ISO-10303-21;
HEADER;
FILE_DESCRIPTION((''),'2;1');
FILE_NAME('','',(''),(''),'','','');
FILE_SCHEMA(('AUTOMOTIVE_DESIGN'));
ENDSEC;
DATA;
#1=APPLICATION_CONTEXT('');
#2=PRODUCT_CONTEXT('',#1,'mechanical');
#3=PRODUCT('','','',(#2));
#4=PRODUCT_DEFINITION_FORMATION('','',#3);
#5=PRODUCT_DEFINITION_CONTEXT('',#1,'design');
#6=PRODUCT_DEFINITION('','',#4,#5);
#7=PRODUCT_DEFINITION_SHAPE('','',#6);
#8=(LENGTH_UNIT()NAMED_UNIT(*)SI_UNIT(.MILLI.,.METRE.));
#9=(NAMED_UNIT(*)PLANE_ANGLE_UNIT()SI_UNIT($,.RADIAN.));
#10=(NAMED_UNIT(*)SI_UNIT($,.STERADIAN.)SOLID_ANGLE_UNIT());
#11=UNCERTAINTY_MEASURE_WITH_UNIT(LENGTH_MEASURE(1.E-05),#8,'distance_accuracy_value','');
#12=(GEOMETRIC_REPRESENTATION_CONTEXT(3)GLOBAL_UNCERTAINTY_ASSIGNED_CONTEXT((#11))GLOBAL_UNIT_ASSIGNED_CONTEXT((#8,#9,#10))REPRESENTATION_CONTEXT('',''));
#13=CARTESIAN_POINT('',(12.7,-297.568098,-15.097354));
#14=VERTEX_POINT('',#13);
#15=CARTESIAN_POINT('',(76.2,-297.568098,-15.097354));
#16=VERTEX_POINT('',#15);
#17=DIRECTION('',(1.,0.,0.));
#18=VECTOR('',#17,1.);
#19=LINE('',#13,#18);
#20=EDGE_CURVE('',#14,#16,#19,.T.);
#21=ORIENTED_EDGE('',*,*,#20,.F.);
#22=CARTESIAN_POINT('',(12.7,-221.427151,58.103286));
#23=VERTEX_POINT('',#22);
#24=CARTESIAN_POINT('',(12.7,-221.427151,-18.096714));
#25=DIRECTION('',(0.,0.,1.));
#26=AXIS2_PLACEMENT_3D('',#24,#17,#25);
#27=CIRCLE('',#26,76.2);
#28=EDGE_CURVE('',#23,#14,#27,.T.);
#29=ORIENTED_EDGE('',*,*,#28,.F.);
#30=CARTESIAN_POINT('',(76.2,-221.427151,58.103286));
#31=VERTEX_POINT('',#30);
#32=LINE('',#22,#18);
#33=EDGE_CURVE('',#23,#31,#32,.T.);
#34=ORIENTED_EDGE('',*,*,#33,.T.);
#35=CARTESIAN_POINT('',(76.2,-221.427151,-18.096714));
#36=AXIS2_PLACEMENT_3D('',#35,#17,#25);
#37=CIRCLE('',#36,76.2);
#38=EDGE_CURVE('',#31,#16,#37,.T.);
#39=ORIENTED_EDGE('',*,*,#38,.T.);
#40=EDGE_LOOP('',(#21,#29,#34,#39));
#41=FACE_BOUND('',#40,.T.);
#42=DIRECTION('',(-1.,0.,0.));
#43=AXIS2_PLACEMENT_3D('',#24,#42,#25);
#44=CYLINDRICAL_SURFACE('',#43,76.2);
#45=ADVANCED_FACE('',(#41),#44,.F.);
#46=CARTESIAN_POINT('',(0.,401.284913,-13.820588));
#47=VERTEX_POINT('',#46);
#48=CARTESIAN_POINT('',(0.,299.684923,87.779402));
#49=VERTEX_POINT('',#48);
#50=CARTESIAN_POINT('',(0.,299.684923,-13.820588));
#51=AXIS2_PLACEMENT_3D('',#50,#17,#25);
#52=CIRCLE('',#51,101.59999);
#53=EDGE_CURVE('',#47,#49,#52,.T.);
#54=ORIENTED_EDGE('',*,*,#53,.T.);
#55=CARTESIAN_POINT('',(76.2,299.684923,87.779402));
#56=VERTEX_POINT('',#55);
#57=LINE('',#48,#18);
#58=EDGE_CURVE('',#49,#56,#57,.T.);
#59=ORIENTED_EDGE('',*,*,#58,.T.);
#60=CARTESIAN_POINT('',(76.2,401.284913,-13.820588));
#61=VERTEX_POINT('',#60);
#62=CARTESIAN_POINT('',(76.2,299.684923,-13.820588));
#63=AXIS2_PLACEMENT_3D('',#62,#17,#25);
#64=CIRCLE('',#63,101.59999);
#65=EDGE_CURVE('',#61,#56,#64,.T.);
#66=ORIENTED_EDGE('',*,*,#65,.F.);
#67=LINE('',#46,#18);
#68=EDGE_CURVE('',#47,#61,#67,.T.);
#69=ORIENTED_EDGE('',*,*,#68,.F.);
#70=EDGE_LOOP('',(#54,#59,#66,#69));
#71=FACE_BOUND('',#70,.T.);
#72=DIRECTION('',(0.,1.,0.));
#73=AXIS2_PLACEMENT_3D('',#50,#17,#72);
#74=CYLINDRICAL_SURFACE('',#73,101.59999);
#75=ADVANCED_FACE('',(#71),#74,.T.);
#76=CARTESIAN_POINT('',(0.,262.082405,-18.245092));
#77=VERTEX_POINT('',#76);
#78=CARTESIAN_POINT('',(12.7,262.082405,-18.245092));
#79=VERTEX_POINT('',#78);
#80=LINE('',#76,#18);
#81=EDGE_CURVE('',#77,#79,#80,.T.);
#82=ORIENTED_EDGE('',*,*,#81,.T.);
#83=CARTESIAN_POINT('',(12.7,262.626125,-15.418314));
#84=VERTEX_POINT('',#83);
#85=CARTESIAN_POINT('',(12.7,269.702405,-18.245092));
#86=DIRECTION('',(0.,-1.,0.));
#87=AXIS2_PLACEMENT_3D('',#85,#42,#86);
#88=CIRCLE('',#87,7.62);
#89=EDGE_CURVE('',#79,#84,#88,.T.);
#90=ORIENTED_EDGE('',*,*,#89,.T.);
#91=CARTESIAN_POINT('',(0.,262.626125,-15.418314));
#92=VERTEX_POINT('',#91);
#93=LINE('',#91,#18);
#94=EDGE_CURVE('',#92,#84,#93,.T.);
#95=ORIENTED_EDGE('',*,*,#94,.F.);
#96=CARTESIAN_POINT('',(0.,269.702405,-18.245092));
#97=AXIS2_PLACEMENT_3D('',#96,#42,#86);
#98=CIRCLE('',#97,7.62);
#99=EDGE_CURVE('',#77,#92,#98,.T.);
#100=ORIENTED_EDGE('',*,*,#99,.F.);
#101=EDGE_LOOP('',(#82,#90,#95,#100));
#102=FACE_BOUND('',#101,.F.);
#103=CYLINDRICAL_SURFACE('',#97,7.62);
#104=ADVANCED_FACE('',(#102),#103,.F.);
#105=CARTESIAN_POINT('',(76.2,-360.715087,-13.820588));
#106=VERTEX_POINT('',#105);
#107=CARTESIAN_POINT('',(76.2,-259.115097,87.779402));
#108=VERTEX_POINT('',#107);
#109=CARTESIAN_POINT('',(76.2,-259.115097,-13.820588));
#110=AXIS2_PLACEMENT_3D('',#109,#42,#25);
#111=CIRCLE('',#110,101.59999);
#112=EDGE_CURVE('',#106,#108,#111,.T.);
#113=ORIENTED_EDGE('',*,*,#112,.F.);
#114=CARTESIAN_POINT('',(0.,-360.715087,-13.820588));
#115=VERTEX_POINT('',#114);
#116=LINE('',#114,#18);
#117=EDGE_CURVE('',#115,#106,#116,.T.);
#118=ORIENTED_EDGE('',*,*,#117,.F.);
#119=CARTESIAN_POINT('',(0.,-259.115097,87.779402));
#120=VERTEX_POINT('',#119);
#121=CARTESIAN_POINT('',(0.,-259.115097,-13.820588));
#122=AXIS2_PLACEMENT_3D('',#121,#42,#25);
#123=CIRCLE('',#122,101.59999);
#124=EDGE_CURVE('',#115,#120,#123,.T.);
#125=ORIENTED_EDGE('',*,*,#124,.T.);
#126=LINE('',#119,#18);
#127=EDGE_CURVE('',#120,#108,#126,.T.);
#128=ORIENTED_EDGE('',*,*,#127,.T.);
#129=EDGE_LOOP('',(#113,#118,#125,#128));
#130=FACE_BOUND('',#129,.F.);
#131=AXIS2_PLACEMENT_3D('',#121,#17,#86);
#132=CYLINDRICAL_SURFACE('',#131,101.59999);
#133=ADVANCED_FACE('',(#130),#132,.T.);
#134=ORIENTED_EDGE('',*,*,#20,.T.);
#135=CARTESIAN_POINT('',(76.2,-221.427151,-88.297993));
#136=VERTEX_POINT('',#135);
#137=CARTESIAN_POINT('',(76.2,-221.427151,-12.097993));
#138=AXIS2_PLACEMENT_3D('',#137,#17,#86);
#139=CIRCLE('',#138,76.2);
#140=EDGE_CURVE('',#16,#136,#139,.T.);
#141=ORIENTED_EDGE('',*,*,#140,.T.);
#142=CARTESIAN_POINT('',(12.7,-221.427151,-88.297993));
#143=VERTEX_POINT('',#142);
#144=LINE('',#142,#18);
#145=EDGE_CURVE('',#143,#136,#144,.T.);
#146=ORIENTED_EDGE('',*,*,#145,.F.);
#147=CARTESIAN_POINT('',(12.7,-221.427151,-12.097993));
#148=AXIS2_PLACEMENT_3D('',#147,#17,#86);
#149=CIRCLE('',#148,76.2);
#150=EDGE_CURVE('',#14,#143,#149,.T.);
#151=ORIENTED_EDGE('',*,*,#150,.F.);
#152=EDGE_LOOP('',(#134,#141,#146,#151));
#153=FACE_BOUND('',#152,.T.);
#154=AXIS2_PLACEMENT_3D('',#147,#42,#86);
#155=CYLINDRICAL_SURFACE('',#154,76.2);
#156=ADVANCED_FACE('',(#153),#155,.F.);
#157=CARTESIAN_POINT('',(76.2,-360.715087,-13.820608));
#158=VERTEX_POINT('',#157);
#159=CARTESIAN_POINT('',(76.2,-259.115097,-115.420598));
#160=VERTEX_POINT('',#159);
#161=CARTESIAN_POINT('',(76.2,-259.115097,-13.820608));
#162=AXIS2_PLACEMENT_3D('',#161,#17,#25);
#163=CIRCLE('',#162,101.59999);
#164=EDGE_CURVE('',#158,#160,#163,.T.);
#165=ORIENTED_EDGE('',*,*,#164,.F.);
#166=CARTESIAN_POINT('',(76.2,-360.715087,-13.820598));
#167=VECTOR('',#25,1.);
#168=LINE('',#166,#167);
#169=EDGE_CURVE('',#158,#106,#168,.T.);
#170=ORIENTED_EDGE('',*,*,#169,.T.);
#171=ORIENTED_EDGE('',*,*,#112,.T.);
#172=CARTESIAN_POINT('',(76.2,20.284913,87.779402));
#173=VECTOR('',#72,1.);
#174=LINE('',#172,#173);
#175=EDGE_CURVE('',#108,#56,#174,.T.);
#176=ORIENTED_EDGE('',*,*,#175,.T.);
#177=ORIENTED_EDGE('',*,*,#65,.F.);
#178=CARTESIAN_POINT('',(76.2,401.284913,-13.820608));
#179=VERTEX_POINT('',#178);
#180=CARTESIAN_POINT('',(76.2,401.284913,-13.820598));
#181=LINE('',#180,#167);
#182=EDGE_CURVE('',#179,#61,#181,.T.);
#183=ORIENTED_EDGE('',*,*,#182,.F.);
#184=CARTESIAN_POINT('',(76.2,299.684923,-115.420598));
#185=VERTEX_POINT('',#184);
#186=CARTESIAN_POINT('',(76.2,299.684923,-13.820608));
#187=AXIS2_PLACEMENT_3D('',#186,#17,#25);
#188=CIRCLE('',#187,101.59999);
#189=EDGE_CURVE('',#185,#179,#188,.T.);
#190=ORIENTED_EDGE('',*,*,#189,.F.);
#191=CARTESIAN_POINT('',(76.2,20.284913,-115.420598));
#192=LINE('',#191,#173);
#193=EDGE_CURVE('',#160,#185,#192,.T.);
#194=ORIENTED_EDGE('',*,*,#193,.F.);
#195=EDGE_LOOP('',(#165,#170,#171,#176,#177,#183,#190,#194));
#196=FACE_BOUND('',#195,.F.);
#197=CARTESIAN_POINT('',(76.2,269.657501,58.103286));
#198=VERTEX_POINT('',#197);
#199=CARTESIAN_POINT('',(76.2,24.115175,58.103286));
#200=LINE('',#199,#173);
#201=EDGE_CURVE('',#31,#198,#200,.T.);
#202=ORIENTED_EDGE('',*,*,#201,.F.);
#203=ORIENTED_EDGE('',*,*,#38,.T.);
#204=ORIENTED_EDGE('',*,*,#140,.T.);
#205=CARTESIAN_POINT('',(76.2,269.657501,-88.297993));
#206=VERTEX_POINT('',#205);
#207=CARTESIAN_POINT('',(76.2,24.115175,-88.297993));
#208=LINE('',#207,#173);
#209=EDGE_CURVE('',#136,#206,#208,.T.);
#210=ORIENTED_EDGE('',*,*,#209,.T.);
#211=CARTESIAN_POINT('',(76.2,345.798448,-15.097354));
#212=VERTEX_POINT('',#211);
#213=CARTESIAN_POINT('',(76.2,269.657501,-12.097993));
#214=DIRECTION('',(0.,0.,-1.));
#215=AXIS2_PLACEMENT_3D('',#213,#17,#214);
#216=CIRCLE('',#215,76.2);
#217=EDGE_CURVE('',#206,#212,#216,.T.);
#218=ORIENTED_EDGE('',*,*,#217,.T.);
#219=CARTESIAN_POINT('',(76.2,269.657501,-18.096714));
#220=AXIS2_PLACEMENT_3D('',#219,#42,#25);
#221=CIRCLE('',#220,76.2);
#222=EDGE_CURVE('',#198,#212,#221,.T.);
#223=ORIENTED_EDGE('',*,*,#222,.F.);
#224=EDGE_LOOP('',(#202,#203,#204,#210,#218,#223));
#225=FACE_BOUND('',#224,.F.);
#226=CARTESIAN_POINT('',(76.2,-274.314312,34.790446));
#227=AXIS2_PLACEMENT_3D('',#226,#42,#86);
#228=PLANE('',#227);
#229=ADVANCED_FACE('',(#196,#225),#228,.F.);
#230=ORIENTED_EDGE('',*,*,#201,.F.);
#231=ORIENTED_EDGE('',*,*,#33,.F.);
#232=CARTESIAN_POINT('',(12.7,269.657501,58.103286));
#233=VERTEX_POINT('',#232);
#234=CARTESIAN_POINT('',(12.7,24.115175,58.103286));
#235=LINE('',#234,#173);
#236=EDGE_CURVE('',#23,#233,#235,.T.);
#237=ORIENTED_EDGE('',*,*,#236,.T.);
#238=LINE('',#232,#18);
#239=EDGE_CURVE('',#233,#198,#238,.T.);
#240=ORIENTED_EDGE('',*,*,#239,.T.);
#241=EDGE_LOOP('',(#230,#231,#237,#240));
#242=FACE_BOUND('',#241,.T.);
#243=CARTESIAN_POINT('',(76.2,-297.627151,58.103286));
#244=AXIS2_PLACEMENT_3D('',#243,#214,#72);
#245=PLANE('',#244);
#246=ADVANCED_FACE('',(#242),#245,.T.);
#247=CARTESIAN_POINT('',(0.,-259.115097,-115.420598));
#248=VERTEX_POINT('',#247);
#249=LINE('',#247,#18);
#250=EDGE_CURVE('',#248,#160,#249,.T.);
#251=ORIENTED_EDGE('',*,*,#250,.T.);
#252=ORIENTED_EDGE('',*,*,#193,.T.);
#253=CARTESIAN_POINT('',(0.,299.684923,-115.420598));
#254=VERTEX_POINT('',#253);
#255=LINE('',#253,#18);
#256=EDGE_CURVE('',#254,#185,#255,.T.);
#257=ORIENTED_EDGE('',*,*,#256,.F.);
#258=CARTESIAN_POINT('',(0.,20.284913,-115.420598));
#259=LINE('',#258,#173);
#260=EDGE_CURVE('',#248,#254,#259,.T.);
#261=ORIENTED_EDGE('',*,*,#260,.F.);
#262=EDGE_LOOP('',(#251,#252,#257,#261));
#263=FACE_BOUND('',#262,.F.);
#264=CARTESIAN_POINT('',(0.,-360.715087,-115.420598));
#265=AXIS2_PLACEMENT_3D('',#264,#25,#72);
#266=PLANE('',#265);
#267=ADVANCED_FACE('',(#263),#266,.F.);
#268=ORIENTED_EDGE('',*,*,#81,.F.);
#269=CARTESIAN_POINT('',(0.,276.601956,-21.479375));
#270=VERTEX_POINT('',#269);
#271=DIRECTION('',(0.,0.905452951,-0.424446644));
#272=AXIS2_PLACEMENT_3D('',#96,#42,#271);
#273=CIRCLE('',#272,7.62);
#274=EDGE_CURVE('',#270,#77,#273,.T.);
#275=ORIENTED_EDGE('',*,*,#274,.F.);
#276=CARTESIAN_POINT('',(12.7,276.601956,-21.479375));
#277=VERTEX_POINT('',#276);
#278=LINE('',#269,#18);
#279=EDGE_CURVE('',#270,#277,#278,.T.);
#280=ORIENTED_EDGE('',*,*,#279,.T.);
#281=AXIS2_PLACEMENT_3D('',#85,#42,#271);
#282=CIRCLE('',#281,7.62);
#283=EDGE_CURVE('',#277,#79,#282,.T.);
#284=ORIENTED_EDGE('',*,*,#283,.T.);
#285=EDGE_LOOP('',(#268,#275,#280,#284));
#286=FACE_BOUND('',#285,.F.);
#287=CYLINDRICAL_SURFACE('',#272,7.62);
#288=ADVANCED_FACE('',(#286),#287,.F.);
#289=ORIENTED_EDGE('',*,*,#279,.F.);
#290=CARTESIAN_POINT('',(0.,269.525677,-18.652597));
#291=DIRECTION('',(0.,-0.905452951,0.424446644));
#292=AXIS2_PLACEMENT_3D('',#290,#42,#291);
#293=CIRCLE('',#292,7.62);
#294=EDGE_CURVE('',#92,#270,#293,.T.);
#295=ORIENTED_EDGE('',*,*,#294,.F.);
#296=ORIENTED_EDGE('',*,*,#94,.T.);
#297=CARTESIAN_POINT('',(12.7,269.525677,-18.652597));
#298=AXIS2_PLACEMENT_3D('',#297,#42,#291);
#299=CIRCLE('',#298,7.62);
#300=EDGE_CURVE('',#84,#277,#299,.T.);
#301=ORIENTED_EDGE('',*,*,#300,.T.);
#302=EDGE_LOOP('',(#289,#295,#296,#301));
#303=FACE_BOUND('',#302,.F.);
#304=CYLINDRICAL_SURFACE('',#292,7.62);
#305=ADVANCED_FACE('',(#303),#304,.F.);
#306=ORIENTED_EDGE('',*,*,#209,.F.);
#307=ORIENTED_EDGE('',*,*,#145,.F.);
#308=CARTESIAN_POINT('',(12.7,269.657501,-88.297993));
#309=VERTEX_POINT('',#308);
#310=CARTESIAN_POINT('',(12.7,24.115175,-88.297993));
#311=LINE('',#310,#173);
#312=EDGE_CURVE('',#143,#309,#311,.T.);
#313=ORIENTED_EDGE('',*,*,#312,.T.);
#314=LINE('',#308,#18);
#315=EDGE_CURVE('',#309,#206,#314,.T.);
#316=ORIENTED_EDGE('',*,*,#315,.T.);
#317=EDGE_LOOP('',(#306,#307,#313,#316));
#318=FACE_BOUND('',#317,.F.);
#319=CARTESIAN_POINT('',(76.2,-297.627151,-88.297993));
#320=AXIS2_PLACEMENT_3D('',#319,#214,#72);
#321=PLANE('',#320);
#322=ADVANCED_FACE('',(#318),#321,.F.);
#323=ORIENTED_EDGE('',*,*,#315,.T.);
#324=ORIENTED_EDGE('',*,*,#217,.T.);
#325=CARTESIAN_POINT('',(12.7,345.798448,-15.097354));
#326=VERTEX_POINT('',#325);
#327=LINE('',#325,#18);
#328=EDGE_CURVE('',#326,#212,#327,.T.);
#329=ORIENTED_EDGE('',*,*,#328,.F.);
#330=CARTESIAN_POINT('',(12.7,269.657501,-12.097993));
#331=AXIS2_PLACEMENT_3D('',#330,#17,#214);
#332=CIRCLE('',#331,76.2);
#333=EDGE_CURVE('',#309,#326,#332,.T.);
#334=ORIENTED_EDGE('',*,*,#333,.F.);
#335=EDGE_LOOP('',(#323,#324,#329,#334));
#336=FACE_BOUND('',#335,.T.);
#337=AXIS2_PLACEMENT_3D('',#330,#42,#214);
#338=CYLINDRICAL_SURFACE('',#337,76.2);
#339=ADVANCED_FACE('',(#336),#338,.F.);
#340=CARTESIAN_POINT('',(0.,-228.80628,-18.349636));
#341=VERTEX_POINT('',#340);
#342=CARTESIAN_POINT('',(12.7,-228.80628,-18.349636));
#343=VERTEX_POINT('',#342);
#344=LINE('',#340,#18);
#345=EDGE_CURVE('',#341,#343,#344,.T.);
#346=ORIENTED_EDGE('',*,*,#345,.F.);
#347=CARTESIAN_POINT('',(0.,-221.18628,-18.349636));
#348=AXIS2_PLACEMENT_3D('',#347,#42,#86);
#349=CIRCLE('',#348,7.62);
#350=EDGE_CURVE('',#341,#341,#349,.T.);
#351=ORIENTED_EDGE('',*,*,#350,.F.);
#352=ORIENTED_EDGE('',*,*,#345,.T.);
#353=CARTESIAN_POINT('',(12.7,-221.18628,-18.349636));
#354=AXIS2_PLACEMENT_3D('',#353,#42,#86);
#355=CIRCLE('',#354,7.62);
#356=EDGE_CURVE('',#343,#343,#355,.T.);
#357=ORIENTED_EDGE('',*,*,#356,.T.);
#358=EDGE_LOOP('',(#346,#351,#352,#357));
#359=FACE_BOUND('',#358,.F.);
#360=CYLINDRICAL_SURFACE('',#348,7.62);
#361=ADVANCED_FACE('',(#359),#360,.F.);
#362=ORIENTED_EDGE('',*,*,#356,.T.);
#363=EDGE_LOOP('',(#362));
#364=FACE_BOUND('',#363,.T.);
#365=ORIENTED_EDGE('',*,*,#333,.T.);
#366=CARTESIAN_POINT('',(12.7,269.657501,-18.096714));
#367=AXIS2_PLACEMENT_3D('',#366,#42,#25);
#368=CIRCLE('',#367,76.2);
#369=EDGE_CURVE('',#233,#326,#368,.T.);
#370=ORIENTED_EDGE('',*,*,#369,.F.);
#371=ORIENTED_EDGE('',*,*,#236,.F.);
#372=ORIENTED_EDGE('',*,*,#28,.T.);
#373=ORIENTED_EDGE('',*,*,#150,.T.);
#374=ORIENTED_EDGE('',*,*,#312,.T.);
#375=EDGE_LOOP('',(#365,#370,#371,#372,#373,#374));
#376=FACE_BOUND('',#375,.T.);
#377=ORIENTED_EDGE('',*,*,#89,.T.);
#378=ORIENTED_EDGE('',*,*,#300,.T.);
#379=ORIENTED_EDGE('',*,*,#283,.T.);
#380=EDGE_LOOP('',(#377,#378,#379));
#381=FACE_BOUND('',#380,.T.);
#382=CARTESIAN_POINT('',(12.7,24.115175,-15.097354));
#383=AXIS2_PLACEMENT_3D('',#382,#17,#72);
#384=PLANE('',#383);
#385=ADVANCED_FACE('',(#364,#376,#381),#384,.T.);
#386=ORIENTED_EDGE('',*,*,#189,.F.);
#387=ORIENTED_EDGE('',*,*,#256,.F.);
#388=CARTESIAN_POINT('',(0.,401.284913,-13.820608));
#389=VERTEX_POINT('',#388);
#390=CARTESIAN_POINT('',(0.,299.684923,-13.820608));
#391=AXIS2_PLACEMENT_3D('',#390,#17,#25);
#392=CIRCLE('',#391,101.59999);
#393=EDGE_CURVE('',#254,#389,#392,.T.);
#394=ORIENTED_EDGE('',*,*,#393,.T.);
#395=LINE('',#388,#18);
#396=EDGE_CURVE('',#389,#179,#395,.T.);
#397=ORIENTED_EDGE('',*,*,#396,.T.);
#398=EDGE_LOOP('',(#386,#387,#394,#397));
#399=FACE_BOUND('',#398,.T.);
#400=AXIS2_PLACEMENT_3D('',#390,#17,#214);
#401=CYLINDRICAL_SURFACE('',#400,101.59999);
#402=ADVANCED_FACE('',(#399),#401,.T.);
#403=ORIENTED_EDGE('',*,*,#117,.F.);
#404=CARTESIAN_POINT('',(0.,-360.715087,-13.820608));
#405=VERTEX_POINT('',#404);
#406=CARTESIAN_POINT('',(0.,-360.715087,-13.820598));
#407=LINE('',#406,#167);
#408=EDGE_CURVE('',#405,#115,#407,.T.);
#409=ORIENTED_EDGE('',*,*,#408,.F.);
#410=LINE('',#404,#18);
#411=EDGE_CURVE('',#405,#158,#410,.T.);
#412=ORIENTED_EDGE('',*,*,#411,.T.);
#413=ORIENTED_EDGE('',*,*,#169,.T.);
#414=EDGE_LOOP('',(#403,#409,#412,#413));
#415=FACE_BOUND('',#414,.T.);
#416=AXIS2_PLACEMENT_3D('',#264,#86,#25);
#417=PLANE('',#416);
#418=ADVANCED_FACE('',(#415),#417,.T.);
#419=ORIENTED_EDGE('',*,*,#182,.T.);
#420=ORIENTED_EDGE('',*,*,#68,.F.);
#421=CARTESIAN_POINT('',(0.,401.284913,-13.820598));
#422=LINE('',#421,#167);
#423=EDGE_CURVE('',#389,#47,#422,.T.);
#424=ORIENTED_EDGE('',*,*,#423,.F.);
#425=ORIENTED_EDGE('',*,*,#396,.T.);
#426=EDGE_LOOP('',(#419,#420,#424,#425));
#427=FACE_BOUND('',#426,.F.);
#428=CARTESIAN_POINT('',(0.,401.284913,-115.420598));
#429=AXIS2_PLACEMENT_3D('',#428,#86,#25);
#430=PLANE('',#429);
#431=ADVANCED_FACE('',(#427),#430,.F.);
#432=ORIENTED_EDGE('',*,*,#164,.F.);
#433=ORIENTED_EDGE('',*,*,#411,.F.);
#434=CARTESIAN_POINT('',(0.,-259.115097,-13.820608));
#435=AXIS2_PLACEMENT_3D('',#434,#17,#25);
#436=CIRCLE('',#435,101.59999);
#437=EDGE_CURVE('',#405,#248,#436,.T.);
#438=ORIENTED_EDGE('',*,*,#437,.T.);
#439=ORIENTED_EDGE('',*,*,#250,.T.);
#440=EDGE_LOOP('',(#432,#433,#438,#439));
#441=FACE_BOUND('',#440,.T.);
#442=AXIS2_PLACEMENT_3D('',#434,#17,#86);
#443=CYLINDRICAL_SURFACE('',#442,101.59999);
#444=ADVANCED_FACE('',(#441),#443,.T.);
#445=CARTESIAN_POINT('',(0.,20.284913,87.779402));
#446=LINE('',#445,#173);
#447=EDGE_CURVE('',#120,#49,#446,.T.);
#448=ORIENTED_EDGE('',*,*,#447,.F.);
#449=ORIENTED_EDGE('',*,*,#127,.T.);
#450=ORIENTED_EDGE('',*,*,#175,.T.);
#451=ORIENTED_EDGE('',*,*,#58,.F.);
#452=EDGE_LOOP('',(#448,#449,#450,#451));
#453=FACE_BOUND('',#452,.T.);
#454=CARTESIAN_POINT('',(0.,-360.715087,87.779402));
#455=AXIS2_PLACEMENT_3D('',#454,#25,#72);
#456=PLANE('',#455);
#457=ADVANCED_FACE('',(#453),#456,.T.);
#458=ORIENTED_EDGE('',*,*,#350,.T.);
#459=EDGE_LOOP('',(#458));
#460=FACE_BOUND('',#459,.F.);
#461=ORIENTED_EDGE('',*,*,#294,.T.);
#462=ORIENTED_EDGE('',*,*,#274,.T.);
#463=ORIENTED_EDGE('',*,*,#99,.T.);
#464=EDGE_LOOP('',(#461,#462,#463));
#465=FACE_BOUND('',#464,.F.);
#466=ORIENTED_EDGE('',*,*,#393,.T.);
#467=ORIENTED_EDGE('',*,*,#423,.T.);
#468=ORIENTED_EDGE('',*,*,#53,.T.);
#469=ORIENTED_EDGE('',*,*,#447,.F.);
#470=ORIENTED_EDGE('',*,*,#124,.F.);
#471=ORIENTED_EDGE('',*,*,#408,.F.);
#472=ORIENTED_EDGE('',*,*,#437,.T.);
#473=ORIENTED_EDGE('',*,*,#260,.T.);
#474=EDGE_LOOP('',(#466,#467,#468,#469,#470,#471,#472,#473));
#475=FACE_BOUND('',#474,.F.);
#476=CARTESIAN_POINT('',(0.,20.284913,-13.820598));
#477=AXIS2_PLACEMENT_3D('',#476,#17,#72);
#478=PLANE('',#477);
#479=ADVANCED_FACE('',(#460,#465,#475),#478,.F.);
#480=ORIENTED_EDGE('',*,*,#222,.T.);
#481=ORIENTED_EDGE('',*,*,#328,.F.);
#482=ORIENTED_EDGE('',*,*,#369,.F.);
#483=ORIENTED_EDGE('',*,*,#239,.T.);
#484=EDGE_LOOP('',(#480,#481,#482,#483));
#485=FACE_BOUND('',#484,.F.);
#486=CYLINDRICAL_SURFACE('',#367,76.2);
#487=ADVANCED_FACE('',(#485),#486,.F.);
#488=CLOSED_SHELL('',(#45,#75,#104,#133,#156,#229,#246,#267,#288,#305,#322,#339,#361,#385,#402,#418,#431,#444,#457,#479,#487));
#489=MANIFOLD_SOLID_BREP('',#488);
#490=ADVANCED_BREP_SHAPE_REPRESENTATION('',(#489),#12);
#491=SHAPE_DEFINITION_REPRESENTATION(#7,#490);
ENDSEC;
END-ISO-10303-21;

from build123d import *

# Parameters (mm, degrees)
F0_W        = 762
F0_H        = 203.2
F1_DEPTH    = 76.2
F2_R        = 101.59999
F3_W        = 643.4846520424
F3_H        = 146.4012786746
F4_DEPTH    = 63.5
F5_T1_DEPTH = 63.5
F8_DEPTH    = 25.4
F9_R        = 7.62
F10_DEPTH   = 25.4


# Not quite as in the source:
# - a fillet or chamfer that OpenCascade refuses, or shapes differently, is made with other operations: its cross-section is extruded or revolved along the edge and cut away or added
# - a fillet or chamfer is up to 0.001 mm smaller than in the source, because OpenCascade refuses the exact size


with BuildPart() as f1:
    # F0 (on Right) → F1 (new body)
    with BuildSketch(Plane.YZ):
        with Locations((20.2849134803, -13.820597699)):
            Rectangle(F0_W, F0_H)
    extrude(amount=F1_DEPTH)

    # F2 (radius 101.6 in the source; OpenCascade refuses exactly that, so slightly less here)
    f2_edges = [f1.edges().sort_by_distance(p)[0] for p in [
        (38.1, -360.715087, 87.779402),
        (38.1, -360.715087, -115.420598),
        (38.1, 401.284913, 87.779402),
        (38.1, 401.284913, -115.420598),
    ]]
    fillet(f2_edges, radius=F2_R)

    # F3 (on face) → F4 (cut)
    with BuildSketch(Plane.YZ.offset(76.2)):
        with Locations((24.1151750088, -15.0973536074)):
            Rectangle(F3_W, F3_H)
    extrude(amount=-F4_DEPTH, mode=Mode.SUBTRACT)

    # F5: fillet of radius 76.2 on 4 edges, made by hand

    # F5_s2 → F5_t1 (join)
    with BuildSketch(Plane.YZ.offset(12.7)):
        with BuildLine():
            ThreePointArc((-221.4271510124, 58.1032857299), (-275.3086877388, 35.7848224563), (-297.6271510124, -18.0967142701))
            Line((-297.6271510124, -18.0967142701), (-297.6271510124, 58.1032857299))
            Line((-297.6271510124, 58.1032857299), (-221.4271510124, 58.1032857299))
        make_face()
        with BuildLine():
            ThreePointArc((-297.6271510124, -12.0979929447), (-275.3086877388, -65.9795296711), (-221.4271510124, -88.2979929447))
            Line((-221.4271510124, -88.2979929447), (-297.6271510124, -88.2979929447))
            Line((-297.6271510124, -88.2979929447), (-297.6271510124, -12.0979929447))
        make_face()
        with BuildLine():
            ThreePointArc((269.65750103, 58.1032857299), (323.5390377564, 35.7848224563), (345.85750103, -18.0967142701))
            Line((345.85750103, -18.0967142701), (345.85750103, 58.1032857299))
            Line((345.85750103, 58.1032857299), (269.65750103, 58.1032857299))
        make_face()
        with BuildLine():
            ThreePointArc((269.65750103, -88.2979929447), (323.5390377564, -65.9795296711), (345.85750103, -12.0979929447))
            Line((345.85750103, -12.0979929447), (345.85750103, -88.2979929447))
            Line((345.85750103, -88.2979929447), (269.65750103, -88.2979929447))
        make_face()
    extrude(amount=F5_T1_DEPTH)

    # F7 (on face) → F8 (cut)
    with BuildSketch(Plane(origin=(0, 0, 0), x_dir=(0, -1, 0), z_dir=(-1, 0, 0))):
        with BuildLine():
            ThreePointArc((-276.6019562226, -21.4793750917), (-268.0456280954, -25.6827990477), (-262.0824047375, -18.2450916618))
            ThreePointArc((-262.0824047375, -18.2450916618), (-262.2195694481, -16.8057946003), (-262.6261254806, -15.4183140124))
            ThreePointArc((-262.6261254806, -15.4183140124), (-272.557495484, -11.6617121999), (-276.6019562226, -21.4793750917))
        make_face()
    extrude(amount=-F8_DEPTH, mode=Mode.SUBTRACT)

    # F9 (on face) → F10 (cut)
    with BuildSketch(Plane(origin=(0, 0, 0), x_dir=(0, -1, 0), z_dir=(-1, 0, 0))):
        with Locations((221.1862802505, -18.3496363461)):
            Circle(F9_R)
    extrude(amount=-F10_DEPTH, mode=Mode.SUBTRACT)


solid = f1.part
